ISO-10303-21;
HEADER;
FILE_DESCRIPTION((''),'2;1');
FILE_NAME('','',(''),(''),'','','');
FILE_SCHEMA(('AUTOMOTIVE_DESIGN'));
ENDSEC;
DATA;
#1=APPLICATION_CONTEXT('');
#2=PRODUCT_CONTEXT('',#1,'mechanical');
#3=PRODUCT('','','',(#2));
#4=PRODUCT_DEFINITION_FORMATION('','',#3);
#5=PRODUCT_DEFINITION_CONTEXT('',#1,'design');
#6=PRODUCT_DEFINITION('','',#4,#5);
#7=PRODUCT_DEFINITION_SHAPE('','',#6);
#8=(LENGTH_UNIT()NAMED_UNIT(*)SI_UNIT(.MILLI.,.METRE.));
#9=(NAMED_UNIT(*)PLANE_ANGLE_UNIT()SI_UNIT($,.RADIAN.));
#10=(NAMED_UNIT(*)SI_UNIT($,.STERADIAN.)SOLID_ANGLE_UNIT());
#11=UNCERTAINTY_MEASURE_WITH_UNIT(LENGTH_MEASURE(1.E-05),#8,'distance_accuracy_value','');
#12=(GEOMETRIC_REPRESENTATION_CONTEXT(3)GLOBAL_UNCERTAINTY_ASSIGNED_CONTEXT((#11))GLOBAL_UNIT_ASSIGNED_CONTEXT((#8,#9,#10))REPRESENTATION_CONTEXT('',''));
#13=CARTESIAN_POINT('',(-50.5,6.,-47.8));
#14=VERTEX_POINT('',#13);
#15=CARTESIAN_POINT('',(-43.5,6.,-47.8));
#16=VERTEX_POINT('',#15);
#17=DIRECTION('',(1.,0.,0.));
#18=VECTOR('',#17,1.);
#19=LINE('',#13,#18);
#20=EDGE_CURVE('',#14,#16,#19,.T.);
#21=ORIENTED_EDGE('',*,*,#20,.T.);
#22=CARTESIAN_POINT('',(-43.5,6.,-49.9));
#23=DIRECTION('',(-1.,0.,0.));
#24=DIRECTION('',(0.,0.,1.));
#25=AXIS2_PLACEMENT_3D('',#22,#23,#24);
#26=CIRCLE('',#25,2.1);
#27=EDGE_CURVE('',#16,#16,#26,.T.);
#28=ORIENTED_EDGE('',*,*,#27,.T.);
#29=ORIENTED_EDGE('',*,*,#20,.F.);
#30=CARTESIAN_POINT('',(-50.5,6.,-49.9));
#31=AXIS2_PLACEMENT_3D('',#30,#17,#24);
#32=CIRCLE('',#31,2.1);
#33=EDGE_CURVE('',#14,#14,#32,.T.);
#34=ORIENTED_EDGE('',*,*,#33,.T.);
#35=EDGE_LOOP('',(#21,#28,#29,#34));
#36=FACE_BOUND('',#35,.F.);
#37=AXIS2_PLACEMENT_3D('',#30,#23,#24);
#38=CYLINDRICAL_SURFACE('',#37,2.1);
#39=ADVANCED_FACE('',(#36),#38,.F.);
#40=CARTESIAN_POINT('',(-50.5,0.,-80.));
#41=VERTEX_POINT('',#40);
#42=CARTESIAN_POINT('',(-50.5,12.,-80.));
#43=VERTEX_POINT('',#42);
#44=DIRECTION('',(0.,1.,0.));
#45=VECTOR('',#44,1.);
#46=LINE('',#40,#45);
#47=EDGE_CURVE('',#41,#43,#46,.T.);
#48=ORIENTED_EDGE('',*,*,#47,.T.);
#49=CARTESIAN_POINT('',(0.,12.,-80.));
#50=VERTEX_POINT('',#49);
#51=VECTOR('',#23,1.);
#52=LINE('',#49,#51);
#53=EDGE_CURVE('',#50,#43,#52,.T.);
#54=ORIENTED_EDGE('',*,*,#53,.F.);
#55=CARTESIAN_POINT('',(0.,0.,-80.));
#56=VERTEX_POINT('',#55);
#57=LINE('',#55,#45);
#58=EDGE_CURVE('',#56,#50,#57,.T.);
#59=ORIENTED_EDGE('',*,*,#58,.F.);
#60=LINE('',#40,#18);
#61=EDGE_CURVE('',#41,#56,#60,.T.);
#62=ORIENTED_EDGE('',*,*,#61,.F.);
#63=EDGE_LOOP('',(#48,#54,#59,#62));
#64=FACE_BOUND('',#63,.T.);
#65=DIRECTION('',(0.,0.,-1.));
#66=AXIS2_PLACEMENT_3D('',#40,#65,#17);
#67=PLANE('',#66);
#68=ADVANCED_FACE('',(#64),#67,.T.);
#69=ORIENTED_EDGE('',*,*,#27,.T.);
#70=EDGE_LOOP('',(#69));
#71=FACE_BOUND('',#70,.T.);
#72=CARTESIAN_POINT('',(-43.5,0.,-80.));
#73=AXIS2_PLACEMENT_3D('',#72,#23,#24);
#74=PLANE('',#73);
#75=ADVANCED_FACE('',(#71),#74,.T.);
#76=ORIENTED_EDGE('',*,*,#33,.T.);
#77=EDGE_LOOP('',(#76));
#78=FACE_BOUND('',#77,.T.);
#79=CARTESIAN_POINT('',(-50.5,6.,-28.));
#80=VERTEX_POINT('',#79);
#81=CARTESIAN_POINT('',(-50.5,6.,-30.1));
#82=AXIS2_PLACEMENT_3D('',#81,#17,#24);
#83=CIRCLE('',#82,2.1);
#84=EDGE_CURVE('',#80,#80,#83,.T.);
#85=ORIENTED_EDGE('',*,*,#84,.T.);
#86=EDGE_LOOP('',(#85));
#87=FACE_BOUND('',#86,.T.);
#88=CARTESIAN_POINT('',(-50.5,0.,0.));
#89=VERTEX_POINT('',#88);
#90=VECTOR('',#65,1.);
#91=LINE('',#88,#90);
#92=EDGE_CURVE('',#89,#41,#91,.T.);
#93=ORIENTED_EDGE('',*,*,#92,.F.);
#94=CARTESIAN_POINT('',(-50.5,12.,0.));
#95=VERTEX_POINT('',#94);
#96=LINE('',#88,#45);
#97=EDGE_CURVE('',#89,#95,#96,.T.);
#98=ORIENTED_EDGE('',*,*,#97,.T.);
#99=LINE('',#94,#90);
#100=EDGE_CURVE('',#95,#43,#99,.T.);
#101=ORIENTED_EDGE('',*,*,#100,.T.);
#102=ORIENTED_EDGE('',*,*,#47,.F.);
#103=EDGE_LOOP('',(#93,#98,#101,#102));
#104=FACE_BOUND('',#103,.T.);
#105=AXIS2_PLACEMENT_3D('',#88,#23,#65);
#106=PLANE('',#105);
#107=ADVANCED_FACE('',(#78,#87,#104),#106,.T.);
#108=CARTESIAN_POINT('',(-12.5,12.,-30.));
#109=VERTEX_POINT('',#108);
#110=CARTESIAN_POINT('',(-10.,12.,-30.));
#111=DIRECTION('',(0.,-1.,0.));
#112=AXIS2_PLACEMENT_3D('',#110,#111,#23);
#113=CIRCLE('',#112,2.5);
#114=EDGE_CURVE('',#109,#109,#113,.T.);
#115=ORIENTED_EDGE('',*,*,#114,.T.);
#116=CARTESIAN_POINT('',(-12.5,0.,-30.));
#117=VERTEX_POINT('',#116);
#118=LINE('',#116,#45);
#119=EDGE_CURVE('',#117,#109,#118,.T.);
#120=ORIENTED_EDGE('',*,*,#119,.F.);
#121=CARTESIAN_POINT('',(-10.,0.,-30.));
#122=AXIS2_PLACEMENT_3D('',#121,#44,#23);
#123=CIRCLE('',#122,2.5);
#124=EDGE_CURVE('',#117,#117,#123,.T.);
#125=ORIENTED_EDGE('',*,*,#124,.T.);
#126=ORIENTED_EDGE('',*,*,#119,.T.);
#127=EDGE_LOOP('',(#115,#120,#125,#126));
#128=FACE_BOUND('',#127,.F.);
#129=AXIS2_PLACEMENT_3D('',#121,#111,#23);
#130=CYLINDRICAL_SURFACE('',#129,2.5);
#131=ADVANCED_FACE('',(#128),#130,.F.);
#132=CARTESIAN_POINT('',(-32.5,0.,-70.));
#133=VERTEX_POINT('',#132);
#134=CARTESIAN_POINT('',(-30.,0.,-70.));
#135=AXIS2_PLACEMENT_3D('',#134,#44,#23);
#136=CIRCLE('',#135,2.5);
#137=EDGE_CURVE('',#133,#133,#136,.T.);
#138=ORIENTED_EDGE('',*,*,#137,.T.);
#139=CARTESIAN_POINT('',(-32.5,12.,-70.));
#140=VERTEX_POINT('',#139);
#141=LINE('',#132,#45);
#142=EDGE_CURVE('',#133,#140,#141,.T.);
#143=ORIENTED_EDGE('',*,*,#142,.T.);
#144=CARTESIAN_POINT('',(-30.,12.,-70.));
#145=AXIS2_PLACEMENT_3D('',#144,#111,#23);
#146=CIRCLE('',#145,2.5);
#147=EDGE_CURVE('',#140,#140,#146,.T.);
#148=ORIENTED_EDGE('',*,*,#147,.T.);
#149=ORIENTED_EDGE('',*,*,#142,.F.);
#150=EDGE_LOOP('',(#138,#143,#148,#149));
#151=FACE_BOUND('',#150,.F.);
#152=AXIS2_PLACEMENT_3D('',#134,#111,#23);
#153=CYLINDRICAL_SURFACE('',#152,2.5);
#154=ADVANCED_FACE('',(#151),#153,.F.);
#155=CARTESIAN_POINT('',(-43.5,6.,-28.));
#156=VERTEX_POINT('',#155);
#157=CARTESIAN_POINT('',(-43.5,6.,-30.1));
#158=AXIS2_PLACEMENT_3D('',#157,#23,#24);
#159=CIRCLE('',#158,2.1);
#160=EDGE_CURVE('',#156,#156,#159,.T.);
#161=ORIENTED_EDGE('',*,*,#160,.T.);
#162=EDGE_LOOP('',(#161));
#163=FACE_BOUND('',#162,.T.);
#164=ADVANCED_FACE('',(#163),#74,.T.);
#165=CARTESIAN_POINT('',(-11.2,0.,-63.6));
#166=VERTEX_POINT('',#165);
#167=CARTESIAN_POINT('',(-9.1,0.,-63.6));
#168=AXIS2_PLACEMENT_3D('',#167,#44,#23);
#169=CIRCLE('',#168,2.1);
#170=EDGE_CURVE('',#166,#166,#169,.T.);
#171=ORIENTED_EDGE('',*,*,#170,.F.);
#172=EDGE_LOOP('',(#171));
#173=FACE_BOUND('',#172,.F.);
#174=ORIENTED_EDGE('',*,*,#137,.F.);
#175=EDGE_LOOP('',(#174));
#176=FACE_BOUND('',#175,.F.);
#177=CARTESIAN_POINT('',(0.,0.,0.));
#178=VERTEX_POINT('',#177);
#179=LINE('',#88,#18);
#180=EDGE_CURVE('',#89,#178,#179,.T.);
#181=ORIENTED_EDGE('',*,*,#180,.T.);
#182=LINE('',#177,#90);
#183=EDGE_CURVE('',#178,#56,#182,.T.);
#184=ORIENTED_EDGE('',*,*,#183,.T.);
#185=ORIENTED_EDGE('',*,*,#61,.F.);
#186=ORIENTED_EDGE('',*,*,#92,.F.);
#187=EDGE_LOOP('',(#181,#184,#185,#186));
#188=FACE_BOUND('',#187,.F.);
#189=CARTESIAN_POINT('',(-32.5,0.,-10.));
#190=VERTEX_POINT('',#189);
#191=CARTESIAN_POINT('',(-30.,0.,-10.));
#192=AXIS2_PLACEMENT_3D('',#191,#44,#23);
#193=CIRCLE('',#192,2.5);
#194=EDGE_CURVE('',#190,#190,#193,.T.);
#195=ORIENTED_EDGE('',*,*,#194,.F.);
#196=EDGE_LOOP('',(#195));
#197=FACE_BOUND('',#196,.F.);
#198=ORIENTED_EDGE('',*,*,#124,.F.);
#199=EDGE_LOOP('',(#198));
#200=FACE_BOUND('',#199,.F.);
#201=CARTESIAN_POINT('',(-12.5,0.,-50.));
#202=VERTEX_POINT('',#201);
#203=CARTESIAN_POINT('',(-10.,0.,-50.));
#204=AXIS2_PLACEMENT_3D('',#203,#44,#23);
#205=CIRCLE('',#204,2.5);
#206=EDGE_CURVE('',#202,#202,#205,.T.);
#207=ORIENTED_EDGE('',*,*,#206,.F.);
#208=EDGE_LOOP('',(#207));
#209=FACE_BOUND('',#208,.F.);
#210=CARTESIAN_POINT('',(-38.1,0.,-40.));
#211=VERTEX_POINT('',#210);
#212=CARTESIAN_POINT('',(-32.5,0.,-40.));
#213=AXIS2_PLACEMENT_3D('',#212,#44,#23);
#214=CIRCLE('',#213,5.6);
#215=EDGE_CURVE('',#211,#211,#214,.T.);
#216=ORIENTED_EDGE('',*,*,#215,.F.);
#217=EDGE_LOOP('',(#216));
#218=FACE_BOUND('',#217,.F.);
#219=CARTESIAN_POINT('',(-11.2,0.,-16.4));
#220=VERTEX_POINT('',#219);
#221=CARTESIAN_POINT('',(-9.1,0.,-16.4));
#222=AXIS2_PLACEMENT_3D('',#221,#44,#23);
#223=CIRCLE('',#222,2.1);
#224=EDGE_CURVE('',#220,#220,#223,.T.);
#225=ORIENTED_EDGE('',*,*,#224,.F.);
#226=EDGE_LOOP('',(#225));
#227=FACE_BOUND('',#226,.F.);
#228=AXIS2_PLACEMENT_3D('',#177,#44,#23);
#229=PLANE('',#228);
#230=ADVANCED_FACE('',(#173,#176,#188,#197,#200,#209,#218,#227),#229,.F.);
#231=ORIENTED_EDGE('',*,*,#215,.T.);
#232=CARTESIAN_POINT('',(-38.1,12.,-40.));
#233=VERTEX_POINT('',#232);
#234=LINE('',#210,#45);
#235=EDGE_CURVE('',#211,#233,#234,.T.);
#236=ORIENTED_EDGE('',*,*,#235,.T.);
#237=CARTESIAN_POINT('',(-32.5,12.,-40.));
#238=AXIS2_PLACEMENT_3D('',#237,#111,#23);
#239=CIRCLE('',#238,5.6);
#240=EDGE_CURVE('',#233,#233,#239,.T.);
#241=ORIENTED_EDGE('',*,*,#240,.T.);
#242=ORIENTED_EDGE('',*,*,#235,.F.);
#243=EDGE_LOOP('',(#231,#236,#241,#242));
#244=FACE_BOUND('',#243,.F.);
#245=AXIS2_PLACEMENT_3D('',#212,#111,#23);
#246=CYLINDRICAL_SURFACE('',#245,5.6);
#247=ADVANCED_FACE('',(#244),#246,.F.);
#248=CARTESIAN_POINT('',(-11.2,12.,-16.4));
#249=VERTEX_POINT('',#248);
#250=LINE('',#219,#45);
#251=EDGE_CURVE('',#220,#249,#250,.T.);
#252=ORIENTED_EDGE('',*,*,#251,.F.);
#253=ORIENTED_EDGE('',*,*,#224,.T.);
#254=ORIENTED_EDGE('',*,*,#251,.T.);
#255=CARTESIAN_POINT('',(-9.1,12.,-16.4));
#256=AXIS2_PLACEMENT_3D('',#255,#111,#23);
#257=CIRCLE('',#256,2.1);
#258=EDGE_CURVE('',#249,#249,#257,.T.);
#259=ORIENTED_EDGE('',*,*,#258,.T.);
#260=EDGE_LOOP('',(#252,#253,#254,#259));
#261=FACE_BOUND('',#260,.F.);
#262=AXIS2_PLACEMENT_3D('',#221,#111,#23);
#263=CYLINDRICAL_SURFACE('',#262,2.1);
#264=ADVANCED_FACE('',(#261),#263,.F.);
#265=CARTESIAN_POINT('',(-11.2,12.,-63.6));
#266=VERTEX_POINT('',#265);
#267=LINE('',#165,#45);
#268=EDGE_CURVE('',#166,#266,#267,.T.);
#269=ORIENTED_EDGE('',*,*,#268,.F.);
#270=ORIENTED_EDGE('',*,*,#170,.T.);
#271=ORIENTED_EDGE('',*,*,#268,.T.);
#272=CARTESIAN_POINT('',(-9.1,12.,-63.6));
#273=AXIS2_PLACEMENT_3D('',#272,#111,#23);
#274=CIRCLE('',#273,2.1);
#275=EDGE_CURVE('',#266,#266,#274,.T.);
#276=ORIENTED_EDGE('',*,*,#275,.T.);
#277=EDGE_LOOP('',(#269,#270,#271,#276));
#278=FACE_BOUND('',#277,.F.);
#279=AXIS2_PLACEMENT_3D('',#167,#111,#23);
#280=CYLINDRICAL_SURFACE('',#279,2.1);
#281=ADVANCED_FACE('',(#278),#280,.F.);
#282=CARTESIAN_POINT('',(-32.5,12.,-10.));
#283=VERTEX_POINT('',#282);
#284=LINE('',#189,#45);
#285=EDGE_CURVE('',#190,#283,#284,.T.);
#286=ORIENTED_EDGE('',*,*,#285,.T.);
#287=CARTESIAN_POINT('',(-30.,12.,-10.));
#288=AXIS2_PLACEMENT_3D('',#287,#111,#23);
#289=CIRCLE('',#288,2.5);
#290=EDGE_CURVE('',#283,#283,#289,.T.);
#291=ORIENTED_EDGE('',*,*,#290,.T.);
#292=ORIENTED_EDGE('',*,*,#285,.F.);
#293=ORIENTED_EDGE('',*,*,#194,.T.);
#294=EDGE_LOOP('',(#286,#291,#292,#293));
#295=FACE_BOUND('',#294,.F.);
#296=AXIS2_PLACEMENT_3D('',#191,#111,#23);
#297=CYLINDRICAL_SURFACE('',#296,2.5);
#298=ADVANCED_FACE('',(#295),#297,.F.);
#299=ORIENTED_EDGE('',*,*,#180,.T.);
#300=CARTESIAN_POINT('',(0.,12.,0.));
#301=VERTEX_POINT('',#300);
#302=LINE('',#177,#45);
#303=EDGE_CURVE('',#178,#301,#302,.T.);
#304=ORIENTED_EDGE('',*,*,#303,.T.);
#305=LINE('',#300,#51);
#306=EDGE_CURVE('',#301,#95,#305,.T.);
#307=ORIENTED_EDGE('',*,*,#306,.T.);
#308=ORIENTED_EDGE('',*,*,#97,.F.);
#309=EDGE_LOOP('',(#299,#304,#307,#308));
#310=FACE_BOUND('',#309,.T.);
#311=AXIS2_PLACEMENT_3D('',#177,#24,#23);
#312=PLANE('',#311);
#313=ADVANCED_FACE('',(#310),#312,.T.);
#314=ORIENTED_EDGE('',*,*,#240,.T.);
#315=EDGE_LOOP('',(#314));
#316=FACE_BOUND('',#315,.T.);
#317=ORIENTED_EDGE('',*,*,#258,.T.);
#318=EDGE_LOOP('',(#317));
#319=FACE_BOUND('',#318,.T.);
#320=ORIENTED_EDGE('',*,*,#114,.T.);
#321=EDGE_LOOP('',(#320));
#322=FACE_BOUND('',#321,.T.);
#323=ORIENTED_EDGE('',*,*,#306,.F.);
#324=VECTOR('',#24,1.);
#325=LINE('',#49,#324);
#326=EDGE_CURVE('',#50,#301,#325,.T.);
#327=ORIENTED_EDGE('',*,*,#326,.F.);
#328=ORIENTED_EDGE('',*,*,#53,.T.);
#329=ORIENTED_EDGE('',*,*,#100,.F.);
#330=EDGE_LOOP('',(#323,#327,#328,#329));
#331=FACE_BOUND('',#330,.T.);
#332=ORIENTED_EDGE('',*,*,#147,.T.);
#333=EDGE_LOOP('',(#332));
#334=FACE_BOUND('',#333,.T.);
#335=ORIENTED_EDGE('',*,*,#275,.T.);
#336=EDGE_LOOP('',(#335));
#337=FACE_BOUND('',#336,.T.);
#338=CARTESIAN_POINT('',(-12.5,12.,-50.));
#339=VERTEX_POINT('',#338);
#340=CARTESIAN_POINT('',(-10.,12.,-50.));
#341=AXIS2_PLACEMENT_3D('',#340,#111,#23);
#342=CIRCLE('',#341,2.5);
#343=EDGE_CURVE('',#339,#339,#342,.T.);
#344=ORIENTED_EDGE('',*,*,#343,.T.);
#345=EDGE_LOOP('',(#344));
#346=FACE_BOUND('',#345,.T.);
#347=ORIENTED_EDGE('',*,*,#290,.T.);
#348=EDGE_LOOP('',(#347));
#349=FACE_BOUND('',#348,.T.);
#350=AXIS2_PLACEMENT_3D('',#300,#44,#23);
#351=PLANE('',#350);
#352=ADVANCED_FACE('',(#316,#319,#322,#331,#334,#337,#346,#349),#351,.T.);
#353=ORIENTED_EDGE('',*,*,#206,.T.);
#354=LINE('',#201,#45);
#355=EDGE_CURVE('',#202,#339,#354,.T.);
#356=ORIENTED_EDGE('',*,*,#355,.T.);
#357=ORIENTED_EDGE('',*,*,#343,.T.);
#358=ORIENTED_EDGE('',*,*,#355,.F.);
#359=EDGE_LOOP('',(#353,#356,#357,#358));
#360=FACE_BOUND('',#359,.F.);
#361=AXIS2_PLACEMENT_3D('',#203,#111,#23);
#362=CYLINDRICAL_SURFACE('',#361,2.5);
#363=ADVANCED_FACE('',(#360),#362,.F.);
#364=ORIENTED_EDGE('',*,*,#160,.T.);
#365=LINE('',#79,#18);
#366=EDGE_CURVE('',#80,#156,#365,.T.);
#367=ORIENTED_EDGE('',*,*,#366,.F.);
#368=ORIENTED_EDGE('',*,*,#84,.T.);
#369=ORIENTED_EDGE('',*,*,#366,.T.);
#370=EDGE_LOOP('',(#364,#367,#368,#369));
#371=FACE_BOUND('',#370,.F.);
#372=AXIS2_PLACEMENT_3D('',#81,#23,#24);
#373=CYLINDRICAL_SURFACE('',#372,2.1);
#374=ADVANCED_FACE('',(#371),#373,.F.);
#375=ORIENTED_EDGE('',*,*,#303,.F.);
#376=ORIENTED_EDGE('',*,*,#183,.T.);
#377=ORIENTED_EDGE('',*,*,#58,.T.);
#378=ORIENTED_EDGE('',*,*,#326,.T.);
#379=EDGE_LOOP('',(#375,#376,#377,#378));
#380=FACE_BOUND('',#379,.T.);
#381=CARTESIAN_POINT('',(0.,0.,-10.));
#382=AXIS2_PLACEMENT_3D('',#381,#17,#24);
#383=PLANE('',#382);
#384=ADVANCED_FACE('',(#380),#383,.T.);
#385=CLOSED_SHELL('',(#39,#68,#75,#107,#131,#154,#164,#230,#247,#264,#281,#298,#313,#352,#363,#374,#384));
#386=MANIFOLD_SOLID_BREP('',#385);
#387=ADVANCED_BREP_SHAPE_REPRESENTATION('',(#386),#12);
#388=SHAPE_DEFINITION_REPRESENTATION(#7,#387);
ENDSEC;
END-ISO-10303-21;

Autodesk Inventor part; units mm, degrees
ref_plane "YZ Plane" through (0, 0, 0) normal (1, 0, 0) x (0, 1, 0)
ref_plane "XZ Plane" through (0, 0, 0) normal (0, 1, 0) x (-1, 0, 0)
ref_plane "XY Plane" through (0, 0, 0) normal (0, 0, 1) x (1, 0, 0)
sketch "Sketch1" plane through (0, 0, 0) normal (0, 1, 0) x (-1, 0, 0)
  line L0 (0, 0) -> (50.5, 0)
  line L1 (50.5, 0) -> (50.5, -80)
  line L2 (50.5, -80) -> (0, -80)
  line L3 (0, -80) -> (0, 0)
  line L4 (0, -80) -> (9.1, -80)
  line L5 (0, -80) -> (10, -80)
  line L6 (10, -80) -> (10, -50)
  circle A0 centre (10, -30) radius 2.5
  circle A1 centre (10, -50) radius 2.5
  line L7 (9.1, -65.7) -> (9.1, -63.6)
  circle A2 centre (9.1, -16.4) radius 2.1
  circle A3 centre (9.1, -63.6) radius 2.1
  line L8 (0, 0) -> (0, -40)
  line L9 (9.1, -40) -> (32.5, -40)
  circle A4 centre (32.5, -40) radius 5.6
  line L10 (0, 0) -> (0, -10)
  line L11 (30, -10) -> (30, -70)
  circle A5 centre (30, -10) radius 2.5
  circle A6 centre (30, -70) radius 2.5
  line L12 (27.5, -10) -> (30, -10)
  line L13 (9.1, 0) -> (9.1, -10)
  line L14 (9.1, -14.3) -> (9.1, -16.4)
  line L15 (9.1, -10) -> (9.1, 0)
  line L16 (9.1, -18.5) -> (9.1, -14.3)
  line L17 (10, -18.2974) -> (10, -14.5026)
  line L18 (10, -50) -> (10, -47.5)
  line L19 (10, -32.5) -> (10, -30)
  line L20 (9.1, -32.3324) -> (9.1, -27.6676)
  line L21 (10, -80) -> (10, -47.5)
  line L22 (10, -40) -> (10, -27.5)
  line L23 (9.1, -65.7) -> (9.1, -61.5)
  line L24 (9.1, -52.3324) -> (9.1, -47.6676)
  dimension "d17" = 5
  dimension "d0" = 50.5
  dimension "d1" = 80
  dimension "d2" = 9.1
  dimension "d3" = 10
  dimension "d4" = 30
  dimension "d5" = 20
  dimension "d6" = 5
  dimension "d7" = 5
  dimension "d8" = 16.4
  dimension "d9" = 16.4
  dimension "d10" = 4.2
  dimension "d11" = 4.2
  dimension "d12" = 32.5
  dimension "d13" = 11.2
  dimension "d14" = 10
  dimension "d15" = 30
  dimension "d16" = 60
  dimension "d27" = 47.2
extrude "Extrusion1" add sketch "Sketch1" along normal blind 12
sketch "Sketch2" plane through (-50.5, 0, -80) normal (-1, 0, 0) x (0, 0, 1)
  line L0 (80, 0) -> (80, 12) projected
  line L1 (80, 0) -> (40, 0)
  line L2 (0, 0) -> (80, 0) projected
  line L3 (40, 0) -> (49.9, 0)
  line L4 (49.9, 0) -> (30.1, 0)
  line L5 (30.1, 0) -> (30.1, 6)
  line L6 (30.1, 6) -> (49.9, 6)
  circle A0 centre (49.9, 6) radius 2.1
  circle A1 centre (30.1, 6) radius 2.1
  dimension "d20" = 9.9
  dimension "d21" = 19.8
  dimension "d22" = 6
  dimension "d23" = 4.2
  dimension "d24" = 4.2
extrude "Extrusion2" cut sketch "Sketch2" against normal blind 7
sketch "Sketch3" plane through (-50.5, 0, -80) normal (-1, 0, 0) x (0, 0, 1)
  circle A0 centre (30.1, 6) radius 2.1 projected
  circle A1 centre (49.9, 6) radius 2.1 projected
  line L0 (0, 0) -> (80, 0) projected
  line L1 (80, 0) -> (80, 12) projected
  line L2 (0, 12) -> (80, 12) projected
  line L3 (0, 0) -> (0, 12) projected
properties part number "tapaperfil"
